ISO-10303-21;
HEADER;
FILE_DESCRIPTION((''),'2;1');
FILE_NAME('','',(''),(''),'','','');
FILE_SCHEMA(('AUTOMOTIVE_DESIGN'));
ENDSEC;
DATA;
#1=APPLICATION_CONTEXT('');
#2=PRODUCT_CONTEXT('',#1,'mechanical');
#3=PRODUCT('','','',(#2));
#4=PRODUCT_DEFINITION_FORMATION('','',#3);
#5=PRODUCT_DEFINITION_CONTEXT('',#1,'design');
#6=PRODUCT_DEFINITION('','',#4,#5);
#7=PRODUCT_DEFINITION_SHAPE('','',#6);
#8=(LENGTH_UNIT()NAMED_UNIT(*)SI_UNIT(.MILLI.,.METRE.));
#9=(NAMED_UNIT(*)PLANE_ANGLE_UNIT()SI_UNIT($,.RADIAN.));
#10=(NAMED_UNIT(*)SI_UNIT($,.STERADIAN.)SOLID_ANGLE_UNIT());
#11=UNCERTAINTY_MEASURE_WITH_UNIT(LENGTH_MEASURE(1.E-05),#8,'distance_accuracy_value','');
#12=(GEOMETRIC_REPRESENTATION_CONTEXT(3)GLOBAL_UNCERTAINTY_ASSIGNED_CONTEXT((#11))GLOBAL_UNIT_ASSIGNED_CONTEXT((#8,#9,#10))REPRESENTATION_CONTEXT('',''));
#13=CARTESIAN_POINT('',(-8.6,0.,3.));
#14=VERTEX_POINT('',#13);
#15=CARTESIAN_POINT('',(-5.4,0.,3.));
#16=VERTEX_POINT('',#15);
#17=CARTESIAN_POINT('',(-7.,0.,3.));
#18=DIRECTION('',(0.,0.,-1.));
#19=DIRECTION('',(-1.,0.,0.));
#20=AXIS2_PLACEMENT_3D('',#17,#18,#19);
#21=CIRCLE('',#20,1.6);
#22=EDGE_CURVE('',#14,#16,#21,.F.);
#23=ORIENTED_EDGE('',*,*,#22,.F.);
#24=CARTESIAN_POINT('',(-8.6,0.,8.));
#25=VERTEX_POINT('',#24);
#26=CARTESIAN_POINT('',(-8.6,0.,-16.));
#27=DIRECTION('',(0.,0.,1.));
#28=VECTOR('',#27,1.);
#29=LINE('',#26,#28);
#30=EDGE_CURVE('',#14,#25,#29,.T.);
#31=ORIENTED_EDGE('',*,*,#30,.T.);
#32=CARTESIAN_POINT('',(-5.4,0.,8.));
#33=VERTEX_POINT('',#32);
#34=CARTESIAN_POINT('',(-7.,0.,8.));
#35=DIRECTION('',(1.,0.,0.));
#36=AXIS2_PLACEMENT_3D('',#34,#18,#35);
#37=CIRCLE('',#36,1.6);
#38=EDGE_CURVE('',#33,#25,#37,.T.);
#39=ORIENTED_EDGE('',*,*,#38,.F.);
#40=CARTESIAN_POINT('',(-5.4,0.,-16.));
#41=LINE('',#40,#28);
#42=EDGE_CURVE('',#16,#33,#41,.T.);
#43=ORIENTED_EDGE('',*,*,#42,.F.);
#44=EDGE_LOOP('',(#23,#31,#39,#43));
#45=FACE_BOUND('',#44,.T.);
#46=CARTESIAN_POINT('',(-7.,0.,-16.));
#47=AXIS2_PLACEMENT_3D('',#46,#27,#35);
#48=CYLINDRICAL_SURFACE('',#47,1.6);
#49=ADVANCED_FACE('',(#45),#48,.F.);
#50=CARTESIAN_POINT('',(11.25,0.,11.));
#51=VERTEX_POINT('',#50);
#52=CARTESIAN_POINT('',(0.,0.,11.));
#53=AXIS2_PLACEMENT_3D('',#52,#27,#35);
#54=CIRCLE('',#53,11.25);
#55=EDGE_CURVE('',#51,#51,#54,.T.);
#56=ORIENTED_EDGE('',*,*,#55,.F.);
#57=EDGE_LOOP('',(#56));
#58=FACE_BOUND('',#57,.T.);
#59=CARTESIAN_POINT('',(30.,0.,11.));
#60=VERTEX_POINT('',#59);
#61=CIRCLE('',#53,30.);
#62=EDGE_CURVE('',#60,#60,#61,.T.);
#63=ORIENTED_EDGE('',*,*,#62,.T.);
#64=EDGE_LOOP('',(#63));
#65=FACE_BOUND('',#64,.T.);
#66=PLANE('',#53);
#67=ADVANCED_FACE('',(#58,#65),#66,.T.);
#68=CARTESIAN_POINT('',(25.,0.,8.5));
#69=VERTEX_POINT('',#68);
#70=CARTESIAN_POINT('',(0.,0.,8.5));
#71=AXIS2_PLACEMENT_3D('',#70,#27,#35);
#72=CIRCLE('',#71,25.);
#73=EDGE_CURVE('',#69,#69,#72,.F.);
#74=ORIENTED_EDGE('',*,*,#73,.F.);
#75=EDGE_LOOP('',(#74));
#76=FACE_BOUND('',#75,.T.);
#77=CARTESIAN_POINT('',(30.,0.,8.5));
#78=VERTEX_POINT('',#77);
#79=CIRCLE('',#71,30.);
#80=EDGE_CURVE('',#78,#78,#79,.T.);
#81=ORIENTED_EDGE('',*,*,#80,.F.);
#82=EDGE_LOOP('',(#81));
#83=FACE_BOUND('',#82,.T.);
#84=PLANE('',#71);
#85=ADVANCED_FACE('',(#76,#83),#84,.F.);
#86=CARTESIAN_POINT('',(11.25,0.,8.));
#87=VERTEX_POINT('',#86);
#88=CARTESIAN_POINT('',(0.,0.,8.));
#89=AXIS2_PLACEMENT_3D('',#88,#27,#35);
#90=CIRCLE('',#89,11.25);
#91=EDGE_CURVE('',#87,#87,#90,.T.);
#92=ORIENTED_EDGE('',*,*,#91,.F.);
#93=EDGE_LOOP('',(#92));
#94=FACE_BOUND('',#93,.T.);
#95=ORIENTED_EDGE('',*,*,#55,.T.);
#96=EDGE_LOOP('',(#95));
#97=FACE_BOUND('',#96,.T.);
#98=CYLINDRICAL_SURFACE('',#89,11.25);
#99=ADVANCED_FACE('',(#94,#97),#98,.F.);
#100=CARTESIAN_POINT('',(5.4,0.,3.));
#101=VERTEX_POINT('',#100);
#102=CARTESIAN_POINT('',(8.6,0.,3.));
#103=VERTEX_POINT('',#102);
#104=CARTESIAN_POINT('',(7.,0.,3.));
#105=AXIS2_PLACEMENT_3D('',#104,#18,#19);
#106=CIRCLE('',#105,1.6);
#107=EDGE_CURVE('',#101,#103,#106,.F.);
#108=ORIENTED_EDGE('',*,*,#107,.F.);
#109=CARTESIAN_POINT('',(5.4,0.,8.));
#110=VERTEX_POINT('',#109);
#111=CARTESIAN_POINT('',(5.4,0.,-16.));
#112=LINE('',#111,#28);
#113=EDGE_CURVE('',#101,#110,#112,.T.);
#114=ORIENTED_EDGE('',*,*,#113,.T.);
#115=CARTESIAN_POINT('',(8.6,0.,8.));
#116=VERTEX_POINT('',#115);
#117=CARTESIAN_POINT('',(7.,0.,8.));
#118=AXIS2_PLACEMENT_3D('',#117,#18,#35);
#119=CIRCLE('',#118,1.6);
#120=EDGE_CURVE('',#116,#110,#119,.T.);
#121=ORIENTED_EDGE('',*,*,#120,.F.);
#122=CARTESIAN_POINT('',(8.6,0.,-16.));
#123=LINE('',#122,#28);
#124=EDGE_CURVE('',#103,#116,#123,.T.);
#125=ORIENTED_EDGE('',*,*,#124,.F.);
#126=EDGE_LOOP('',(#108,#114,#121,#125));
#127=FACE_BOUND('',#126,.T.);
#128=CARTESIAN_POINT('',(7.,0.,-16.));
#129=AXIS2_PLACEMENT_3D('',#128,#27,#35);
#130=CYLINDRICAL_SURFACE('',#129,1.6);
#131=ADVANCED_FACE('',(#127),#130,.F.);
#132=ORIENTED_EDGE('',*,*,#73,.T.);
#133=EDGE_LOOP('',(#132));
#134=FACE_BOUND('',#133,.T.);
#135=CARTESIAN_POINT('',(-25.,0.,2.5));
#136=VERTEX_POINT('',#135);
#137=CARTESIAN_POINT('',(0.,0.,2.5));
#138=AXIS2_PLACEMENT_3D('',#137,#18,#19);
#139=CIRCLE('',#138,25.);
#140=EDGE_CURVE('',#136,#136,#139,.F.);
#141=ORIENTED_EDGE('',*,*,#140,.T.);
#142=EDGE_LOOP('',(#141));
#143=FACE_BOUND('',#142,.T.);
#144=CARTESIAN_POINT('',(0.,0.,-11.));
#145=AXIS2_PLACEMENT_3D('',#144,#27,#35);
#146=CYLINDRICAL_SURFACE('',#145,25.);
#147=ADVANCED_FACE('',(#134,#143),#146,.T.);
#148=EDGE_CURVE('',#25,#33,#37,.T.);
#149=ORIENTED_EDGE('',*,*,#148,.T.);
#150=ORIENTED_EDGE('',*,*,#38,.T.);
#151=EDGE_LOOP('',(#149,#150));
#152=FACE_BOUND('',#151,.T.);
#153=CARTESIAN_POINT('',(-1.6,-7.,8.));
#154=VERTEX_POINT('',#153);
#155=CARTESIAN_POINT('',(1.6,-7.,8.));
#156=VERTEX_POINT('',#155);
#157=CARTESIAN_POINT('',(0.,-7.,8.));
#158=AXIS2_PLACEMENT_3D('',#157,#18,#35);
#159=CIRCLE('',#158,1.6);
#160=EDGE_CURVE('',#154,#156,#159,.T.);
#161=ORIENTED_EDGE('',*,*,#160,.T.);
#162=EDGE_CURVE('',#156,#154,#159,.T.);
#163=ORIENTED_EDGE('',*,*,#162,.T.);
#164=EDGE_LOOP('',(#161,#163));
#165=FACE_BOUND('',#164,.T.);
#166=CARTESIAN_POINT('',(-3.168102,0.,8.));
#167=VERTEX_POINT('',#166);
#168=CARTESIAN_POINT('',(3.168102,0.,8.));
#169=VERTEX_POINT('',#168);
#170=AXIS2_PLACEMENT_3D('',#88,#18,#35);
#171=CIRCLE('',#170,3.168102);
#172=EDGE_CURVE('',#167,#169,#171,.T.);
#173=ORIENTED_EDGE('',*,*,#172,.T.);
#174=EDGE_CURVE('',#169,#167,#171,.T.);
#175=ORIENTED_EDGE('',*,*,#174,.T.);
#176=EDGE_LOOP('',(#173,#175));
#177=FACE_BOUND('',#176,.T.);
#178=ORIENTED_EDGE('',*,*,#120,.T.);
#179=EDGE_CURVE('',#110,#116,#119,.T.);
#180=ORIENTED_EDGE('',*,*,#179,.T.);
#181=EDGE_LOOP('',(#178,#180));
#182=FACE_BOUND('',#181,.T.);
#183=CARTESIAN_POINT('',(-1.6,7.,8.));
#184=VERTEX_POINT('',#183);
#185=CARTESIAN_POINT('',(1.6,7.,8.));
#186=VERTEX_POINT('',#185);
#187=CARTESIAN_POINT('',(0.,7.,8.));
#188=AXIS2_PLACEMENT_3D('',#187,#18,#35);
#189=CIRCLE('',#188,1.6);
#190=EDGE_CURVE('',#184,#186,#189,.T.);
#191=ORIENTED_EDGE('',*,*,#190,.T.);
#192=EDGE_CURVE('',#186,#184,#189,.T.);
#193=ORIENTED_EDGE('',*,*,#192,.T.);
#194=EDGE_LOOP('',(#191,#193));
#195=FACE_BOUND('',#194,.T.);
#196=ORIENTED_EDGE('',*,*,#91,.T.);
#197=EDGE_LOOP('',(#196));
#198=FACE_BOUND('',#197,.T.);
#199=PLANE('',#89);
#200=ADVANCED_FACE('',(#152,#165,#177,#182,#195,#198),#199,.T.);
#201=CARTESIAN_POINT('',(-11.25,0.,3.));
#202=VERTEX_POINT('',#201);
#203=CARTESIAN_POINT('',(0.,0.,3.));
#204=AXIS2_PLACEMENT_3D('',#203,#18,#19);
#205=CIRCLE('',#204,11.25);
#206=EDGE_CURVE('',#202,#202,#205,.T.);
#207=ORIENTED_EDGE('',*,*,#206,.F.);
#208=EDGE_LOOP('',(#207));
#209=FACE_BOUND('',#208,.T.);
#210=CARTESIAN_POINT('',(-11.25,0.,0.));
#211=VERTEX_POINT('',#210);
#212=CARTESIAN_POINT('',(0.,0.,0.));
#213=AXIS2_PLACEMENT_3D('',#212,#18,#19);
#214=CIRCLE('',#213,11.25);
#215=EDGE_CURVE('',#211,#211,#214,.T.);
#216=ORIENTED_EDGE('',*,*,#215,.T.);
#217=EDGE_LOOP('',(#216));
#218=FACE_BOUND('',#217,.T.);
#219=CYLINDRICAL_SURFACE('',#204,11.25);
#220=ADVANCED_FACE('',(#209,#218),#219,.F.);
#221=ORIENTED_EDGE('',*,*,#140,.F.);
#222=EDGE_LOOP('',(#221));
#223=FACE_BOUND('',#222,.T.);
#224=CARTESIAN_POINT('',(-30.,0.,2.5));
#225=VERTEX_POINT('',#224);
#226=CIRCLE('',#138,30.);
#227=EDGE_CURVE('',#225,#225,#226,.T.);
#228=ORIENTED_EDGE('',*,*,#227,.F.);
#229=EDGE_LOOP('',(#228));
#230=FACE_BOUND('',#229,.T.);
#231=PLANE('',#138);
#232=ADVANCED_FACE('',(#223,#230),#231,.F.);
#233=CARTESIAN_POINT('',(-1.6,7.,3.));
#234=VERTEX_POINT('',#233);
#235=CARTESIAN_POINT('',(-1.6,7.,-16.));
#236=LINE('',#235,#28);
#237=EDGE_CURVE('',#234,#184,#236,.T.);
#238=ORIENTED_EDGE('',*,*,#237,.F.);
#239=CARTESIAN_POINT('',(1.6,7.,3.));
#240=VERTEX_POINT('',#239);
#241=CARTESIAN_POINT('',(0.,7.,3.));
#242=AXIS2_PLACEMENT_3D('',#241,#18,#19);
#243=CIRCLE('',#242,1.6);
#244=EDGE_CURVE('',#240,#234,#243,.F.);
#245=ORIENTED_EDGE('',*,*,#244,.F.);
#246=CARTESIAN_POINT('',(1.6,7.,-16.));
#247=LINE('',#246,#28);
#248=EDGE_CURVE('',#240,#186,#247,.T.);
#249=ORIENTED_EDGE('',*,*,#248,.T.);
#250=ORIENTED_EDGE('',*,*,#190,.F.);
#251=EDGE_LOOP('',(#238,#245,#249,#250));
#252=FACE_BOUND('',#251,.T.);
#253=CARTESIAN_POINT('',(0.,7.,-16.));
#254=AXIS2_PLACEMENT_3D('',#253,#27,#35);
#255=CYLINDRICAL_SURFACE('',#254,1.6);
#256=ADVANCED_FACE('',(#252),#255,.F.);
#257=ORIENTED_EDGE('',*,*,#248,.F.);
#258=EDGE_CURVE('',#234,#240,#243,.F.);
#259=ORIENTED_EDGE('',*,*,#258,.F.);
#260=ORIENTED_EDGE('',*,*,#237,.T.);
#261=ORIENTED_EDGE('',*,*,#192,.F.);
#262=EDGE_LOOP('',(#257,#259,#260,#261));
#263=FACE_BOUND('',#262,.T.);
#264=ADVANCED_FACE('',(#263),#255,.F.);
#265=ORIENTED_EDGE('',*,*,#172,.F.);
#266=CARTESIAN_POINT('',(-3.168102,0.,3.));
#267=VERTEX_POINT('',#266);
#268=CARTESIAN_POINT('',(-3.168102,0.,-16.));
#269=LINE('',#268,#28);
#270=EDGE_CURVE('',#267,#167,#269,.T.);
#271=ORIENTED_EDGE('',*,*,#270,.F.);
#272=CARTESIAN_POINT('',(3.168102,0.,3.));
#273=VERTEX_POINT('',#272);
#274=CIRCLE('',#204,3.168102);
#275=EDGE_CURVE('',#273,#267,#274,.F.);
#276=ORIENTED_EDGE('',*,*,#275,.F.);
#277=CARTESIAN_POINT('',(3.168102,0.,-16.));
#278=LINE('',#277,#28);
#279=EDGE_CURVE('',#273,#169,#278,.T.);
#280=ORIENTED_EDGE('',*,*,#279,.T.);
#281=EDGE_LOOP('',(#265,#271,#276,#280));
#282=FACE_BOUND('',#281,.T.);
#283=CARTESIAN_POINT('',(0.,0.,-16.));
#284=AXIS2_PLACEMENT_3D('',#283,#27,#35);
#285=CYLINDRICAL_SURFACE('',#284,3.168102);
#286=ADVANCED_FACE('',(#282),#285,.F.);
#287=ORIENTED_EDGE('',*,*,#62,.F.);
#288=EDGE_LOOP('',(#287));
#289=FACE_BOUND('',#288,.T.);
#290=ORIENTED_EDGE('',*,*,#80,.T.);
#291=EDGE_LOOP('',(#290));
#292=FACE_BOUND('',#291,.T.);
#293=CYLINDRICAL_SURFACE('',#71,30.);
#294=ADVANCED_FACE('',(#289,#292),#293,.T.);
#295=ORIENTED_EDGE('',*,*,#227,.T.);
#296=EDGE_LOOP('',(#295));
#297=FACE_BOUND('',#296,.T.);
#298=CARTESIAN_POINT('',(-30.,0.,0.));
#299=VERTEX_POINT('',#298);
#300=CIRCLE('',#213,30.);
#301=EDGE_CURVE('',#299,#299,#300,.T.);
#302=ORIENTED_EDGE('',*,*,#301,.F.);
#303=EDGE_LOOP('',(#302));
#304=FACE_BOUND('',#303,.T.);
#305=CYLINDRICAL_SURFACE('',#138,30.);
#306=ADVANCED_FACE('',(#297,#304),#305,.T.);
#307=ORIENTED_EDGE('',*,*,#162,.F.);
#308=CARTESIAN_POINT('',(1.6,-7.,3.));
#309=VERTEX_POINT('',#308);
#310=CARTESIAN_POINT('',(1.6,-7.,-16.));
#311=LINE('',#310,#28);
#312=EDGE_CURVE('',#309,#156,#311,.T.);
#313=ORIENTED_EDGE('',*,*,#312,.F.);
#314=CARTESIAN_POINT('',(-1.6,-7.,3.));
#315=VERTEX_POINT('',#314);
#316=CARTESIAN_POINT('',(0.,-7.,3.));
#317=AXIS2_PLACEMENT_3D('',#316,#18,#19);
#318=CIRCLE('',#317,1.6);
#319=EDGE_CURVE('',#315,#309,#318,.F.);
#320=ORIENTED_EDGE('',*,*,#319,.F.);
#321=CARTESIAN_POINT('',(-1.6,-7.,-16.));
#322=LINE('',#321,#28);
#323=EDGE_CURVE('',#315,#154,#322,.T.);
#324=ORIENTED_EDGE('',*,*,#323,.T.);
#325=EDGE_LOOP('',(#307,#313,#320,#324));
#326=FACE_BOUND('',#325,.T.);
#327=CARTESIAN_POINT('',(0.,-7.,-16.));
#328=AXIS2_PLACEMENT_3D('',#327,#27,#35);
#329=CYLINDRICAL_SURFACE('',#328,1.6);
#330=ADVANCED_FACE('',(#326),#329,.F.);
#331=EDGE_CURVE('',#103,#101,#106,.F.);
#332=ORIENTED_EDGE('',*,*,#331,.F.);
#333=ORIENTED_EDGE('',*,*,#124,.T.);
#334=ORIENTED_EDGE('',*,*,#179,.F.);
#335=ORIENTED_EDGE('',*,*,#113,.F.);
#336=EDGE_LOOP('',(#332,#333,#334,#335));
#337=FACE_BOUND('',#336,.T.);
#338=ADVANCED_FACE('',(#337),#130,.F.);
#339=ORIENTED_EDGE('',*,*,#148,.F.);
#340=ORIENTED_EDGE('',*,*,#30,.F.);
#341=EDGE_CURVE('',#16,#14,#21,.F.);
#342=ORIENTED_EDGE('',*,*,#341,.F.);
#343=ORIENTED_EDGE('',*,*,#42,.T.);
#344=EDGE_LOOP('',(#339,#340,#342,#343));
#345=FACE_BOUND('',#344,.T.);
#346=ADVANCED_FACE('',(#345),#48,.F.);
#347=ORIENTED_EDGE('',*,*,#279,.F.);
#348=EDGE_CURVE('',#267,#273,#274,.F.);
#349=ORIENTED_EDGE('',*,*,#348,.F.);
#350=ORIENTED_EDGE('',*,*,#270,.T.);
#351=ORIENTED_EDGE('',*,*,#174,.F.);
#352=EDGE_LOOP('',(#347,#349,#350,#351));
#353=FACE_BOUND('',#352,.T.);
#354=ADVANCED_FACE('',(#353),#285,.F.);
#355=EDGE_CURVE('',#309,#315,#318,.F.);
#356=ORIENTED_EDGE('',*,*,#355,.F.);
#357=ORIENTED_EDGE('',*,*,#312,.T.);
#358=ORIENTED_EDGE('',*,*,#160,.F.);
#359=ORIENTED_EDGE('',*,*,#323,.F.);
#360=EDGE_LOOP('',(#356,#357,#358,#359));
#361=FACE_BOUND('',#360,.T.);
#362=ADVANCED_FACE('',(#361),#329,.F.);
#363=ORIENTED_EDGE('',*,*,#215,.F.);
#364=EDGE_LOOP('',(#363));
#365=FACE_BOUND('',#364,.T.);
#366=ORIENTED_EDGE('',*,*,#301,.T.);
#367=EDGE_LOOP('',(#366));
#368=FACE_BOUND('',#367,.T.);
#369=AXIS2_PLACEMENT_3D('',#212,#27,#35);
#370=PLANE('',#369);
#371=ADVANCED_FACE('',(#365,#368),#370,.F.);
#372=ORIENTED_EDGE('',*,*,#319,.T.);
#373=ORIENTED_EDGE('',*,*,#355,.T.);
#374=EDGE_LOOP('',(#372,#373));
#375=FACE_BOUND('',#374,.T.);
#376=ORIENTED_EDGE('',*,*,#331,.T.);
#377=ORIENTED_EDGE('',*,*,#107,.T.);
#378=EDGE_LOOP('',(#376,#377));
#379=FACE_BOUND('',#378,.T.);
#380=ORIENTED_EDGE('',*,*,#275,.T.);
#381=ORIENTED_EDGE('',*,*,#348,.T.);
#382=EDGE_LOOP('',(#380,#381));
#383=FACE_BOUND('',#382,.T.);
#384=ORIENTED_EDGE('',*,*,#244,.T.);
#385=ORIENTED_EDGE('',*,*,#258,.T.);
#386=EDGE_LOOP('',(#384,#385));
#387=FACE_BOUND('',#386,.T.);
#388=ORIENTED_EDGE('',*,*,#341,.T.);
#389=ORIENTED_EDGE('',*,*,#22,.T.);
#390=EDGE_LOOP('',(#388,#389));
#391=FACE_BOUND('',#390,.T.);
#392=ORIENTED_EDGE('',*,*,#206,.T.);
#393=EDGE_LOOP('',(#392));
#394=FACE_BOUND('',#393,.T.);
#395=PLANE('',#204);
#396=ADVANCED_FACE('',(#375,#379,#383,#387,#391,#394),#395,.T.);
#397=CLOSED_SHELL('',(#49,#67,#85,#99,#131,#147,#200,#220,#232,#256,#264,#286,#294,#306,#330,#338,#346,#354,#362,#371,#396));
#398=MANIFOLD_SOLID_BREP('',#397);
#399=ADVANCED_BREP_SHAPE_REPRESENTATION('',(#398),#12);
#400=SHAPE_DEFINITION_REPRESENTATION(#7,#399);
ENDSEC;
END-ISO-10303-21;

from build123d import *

# Parameters (mm, degrees)
CUT_EXTRUDE1_START         = -11
CUT_EXTRUDE1_OUTLINE_R     = 25
CUT_EXTRUDE1_OUTLINE_R_2   = 10.5
CUT_EXTRUDE1_DEPTH         = 11
CUT_EXTRUDE1_2_OUTLINE_R   = 10.5
CUT_EXTRUDE1_2_OUTLINE_R_2 = 1.6
CUT_EXTRUDE1_2_OUTLINE_R_3 = 3.16810248
CUT_EXTRUDE1_2_DEPTH       = 8
SKETCH2_R                  = 30
BOSS_EXTRUDE1_DEPTH        = 2.5
BOSS_EXTRUDE2_START        = -2.5
SKETCH3_R                  = 30
BOSS_EXTRUDE2_DEPTH        = 2.5
SKETCH4_R                  = 11.25
CUT_EXTRUDE2_DEPTH         = 3
CUT_EXTRUDE3_START         = -3
SKETCH5_R                  = 3.16810248
CUT_EXTRUDE3_DEPTH         = 3
CUT_EXTRUDE4_START         = -3
SKETCH7_R                  = 11.25
CUT_EXTRUDE4_DEPTH         = 3


with BuildPart() as part:
    # Cut-Extrude1: read off the stored shape, not the designer's step
    # Cut-Extrude1 outline → Cut-Extrude1 (new body)
    with BuildSketch(Plane.XY.offset(11).offset(CUT_EXTRUDE1_START)):
        Circle(CUT_EXTRUDE1_OUTLINE_R)
        Circle(CUT_EXTRUDE1_OUTLINE_R_2, mode=Mode.SUBTRACT)
    extrude(amount=CUT_EXTRUDE1_DEPTH)

    # Cut-Extrude1 2 outline → Cut-Extrude1 2 (add)
    with BuildSketch(Plane.XY.offset(11).offset(CUT_EXTRUDE1_START)):
        Circle(CUT_EXTRUDE1_2_OUTLINE_R)
        with Locations((0, -7)):
            Circle(CUT_EXTRUDE1_2_OUTLINE_R_2, mode=Mode.SUBTRACT)
        with Locations((-7, 0)):
            Circle(CUT_EXTRUDE1_2_OUTLINE_R_2, mode=Mode.SUBTRACT)
        Circle(CUT_EXTRUDE1_2_OUTLINE_R_3, mode=Mode.SUBTRACT)
        with Locations((7, 0)):
            Circle(CUT_EXTRUDE1_2_OUTLINE_R_2, mode=Mode.SUBTRACT)
        with Locations((0, 7)):
            Circle(CUT_EXTRUDE1_2_OUTLINE_R_2, mode=Mode.SUBTRACT)
    extrude(amount=CUT_EXTRUDE1_2_DEPTH)

    # Sketch2 → Boss-Extrude1 (add)
    with BuildSketch(Plane.XY.offset(11)):
        Circle(SKETCH2_R)
    extrude(amount=-BOSS_EXTRUDE1_DEPTH)

    # Sketch3 → Boss-Extrude2 (add)
    with BuildSketch(Plane(origin=(0, 0, 0), x_dir=(-1, 0, 0), z_dir=(0, 0, -1)).offset(BOSS_EXTRUDE2_START)):
        with Locations(Location((0, 0, 0), (0, 0, 180))):
            Circle(SKETCH3_R)
    extrude(amount=BOSS_EXTRUDE2_DEPTH)

    # Sketch4 → Cut-Extrude2 (cut)
    with BuildSketch(Plane.XY.offset(11)):
        Circle(SKETCH4_R)
    extrude(amount=-CUT_EXTRUDE2_DEPTH, mode=Mode.SUBTRACT)

    # Sketch5 → Cut-Extrude3 (cut)
    with BuildSketch(Plane.XY.offset(2.5).offset(CUT_EXTRUDE3_START)):
        Circle(SKETCH5_R)
    extrude(amount=CUT_EXTRUDE3_DEPTH, mode=Mode.SUBTRACT)

    # Sketch7 → Cut-Extrude4 (cut)
    with BuildSketch(Plane(origin=(0, 0, 0), x_dir=(-1, 0, 0), z_dir=(0, 0, -1)).offset(CUT_EXTRUDE4_START)):
        with Locations(Location((0, 0, 0), (0, 0, 180))):
            Circle(SKETCH7_R)
    extrude(amount=CUT_EXTRUDE4_DEPTH, mode=Mode.SUBTRACT)


solid = part.part
